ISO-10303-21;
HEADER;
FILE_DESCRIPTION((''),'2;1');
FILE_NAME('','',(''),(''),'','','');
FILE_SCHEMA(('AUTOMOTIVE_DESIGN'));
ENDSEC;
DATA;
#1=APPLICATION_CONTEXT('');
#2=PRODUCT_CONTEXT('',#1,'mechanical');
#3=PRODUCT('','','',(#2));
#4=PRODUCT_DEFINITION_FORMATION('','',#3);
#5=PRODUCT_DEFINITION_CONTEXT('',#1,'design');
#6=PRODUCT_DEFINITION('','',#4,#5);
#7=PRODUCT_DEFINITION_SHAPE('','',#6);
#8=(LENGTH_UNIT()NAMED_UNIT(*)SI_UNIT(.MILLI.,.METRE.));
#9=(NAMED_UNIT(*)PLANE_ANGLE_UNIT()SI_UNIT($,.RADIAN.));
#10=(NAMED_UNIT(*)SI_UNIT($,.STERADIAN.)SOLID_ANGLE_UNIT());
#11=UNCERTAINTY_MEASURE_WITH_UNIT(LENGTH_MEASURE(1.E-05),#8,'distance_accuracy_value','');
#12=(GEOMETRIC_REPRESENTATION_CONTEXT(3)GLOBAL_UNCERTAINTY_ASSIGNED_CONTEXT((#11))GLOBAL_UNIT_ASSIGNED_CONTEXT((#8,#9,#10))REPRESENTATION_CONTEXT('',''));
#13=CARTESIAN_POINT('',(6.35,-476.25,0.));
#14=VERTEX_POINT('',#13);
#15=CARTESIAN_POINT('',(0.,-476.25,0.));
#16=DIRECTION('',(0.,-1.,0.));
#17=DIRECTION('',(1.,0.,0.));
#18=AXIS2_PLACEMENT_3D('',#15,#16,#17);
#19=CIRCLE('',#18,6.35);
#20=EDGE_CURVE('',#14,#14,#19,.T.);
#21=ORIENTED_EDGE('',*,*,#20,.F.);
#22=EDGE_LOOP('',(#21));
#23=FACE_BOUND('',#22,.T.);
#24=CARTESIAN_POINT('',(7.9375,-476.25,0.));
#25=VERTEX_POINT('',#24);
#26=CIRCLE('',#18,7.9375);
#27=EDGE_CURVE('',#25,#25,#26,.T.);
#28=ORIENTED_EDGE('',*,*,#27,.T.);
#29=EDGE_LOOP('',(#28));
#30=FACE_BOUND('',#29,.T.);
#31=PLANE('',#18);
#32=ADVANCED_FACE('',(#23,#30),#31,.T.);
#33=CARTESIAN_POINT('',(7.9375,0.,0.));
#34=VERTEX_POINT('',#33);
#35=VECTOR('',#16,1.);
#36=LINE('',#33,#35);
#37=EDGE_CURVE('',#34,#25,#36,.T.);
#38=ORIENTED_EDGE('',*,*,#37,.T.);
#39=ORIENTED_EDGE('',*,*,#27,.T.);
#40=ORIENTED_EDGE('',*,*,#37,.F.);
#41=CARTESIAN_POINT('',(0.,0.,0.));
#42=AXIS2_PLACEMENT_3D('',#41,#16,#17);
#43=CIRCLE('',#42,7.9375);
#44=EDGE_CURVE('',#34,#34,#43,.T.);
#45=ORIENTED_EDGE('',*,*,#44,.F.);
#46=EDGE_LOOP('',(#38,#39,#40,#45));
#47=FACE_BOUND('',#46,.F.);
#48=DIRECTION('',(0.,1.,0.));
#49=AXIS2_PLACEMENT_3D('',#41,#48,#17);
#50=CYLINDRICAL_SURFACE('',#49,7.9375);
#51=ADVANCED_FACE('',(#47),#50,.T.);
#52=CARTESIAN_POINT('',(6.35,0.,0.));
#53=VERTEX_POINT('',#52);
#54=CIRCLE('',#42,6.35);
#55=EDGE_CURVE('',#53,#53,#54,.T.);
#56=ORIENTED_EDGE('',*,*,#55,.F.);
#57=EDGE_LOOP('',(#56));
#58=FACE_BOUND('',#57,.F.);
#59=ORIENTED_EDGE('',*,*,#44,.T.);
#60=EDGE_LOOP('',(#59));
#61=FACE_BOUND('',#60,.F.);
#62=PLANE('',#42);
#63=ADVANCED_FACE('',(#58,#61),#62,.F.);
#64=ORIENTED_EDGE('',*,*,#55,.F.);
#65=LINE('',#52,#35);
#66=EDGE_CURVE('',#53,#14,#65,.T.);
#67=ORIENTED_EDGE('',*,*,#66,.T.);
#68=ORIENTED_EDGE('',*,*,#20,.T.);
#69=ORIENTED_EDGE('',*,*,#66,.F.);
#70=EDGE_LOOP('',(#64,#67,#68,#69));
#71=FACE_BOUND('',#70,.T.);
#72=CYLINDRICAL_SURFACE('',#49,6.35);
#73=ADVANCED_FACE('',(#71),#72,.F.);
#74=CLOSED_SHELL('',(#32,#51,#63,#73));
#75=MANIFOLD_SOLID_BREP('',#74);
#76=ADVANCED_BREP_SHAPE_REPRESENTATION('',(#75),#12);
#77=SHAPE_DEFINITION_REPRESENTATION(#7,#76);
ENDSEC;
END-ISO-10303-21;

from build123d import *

# Parameters (mm, degrees)
F0_R     = 7.9375
F0_R_2   = 6.35
F2_DEPTH = 476.25


# Not quite as in the source:
# - a variable given as a bare number and used for a length is read in inches; the dataset says mm whatever the document's units were


with BuildPart() as f2:
    # F0 (on Front) → F2 (new body)
    with BuildSketch(Plane.XZ):
        Circle(F0_R)
        Circle(F0_R_2, mode=Mode.SUBTRACT)
    extrude(amount=F2_DEPTH)


solid = f2.part
